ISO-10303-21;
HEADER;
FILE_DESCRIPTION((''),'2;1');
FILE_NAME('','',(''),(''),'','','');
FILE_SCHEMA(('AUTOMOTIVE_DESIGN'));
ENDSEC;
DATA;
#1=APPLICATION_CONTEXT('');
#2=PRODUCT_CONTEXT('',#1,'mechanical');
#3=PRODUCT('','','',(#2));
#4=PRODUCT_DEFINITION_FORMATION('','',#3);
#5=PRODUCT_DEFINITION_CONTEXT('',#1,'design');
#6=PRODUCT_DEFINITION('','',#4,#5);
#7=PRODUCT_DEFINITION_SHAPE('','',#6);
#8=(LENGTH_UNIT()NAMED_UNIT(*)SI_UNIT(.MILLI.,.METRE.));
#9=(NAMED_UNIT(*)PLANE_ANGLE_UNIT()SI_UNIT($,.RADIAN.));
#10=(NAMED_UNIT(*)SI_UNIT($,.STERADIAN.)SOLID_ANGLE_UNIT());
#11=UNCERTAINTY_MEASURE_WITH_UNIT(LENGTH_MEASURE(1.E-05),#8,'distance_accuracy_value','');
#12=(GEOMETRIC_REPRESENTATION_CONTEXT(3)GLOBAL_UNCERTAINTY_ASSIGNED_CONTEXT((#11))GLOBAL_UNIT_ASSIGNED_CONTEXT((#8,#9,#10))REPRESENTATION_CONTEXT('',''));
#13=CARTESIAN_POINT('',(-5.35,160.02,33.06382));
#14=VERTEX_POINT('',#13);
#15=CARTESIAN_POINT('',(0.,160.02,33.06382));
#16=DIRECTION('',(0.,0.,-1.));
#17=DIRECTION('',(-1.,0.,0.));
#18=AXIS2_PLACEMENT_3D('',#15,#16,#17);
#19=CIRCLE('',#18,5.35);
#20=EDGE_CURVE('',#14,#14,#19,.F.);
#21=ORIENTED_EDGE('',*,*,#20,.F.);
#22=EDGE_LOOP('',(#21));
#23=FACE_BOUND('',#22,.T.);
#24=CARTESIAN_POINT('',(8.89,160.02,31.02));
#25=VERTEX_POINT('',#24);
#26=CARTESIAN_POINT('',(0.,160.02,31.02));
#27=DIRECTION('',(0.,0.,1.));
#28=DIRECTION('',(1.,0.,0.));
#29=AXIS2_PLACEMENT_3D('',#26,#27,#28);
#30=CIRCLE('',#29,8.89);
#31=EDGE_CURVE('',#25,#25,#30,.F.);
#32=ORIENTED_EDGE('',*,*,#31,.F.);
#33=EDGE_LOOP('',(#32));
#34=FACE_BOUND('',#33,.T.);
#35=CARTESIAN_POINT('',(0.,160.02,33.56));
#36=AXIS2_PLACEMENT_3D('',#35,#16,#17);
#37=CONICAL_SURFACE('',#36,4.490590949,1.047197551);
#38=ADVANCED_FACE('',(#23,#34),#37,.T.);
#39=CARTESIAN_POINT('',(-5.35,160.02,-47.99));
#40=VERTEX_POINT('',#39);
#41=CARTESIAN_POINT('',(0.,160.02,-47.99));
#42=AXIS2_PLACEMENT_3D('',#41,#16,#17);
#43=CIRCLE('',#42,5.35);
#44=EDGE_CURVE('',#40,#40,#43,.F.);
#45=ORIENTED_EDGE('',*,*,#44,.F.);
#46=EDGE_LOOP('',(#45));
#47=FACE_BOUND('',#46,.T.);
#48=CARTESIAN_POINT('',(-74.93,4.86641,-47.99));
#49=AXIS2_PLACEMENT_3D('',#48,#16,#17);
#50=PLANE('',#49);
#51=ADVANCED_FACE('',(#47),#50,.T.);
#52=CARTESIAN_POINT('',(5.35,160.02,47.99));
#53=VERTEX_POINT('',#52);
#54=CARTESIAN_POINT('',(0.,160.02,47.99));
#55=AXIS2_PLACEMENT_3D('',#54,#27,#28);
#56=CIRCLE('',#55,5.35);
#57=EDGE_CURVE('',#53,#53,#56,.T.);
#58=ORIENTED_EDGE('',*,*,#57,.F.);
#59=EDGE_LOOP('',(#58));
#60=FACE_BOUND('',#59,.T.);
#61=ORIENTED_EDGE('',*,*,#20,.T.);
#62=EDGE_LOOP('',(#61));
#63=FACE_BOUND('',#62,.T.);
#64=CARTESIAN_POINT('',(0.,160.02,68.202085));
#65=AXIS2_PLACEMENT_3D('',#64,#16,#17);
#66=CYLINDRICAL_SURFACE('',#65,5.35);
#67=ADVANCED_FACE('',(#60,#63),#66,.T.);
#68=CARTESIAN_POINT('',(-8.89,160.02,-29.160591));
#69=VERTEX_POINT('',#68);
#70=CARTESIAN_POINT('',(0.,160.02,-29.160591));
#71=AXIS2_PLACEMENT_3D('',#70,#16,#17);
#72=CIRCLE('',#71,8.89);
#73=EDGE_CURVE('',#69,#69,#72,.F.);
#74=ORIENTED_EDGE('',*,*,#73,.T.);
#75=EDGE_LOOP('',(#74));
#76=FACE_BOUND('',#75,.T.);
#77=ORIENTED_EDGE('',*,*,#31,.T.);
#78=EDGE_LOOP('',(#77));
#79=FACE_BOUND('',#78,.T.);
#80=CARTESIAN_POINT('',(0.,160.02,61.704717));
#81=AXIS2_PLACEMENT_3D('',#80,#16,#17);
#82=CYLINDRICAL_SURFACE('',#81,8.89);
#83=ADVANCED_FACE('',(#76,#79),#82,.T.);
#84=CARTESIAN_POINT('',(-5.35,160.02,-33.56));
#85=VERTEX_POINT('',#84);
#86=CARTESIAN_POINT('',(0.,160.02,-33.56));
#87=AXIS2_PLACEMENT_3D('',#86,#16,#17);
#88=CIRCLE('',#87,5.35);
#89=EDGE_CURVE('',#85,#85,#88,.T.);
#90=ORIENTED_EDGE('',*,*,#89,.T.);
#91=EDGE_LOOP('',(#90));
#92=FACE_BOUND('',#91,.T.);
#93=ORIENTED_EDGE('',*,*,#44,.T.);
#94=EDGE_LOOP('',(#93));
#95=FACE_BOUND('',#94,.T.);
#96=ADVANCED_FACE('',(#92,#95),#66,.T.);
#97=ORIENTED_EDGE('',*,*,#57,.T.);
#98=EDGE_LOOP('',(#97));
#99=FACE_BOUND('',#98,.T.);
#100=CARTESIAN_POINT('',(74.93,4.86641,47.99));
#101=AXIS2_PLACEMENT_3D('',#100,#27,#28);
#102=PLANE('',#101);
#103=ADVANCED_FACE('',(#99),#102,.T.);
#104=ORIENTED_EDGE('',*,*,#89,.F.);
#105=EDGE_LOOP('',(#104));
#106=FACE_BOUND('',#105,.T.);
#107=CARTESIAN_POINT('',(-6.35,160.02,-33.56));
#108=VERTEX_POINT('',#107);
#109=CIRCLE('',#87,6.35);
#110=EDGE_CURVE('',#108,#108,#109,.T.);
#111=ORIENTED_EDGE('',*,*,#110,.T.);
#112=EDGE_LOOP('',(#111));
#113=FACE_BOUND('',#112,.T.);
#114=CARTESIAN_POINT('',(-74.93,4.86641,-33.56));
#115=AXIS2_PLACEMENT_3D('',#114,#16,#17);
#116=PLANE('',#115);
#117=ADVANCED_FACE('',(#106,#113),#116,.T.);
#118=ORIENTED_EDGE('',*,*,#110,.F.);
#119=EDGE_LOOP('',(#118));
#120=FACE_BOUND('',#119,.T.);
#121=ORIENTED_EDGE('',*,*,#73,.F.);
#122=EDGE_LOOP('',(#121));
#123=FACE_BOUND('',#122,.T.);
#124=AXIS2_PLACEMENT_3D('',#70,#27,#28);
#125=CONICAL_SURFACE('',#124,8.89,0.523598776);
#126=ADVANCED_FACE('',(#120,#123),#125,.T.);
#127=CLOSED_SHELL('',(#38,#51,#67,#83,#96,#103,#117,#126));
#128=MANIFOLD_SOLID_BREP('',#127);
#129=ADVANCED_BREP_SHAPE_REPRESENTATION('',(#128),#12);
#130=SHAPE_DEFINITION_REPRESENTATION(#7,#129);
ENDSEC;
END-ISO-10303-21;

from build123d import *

# Parameters (mm, degrees)
BOSS_EXTRUDE1_DEPTH      = 47.99
BOSS_EXTRUDE1_DEPTH_BACK = 47.99
SKETCH2_R                = 5.35
BOSS_EXTRUDE2_DEPTH      = 33.56
BOSS_EXTRUDE2_DEPTH_BACK = 33.56
SKETCH3_R                = 8.89
CHAMFER1_SIZE            = 4.399409051
CHAMFER1_SIZE_2          = 2.54


with BuildPart() as part:
    # Sketch2 → Boss-Extrude1 (new, two sides: drawn at the far end of the back side and taken through both)
    with BuildSketch(Plane.XY.offset(-BOSS_EXTRUDE1_DEPTH_BACK)):
        with Locations(Location((0, 160.02, 0), (0, 0, 180))):
            Circle(SKETCH2_R)
    extrude(amount=BOSS_EXTRUDE1_DEPTH + BOSS_EXTRUDE1_DEPTH_BACK)

    # Sketch3 → Boss-Extrude2 (add, two sides: drawn at the far end of the back side and taken through both)
    with BuildSketch(Plane.XY.offset(-BOSS_EXTRUDE2_DEPTH_BACK)):
        with Locations(Location((0, 160.02, 0), (0, 0, 180))):
            Circle(SKETCH3_R)
    extrude(amount=BOSS_EXTRUDE2_DEPTH + BOSS_EXTRUDE2_DEPTH_BACK)

    # Chamfer1
    # the kernel refuses this chamfer: 4.399409051, 2.54 mm, written as the material it takes off along each edge
    with BuildSketch(Plane(origin=(0, 160.02, -33.56), x_dir=(-1, 0, 0), z_dir=(0, 1, 0))) as chamfer1_piece_1:
        Polygon((8.89, CHAMFER1_SIZE), (8.89 - CHAMFER1_SIZE_2, 0), (8.89, 0), align=None)
    revolve(axis=Axis((0, 160.02, -33.56), (0, 0, 1)), mode=Mode.SUBTRACT)
    with BuildSketch(Plane(origin=(0, 160.02, 33.56), x_dir=(-1, 0, 0), z_dir=(0, 1, 0))) as chamfer1_piece_2_section:
        Polygon((8.89 - CHAMFER1_SIZE, 0), (8.89, -CHAMFER1_SIZE_2), (8.89, 0), align=None)
    chamfer1_piece_2 = revolve(axis=Axis((0, 160.02, 33.56), (0, 0, 1)), mode=Mode.PRIVATE)
    chamfer1_piece_2 = chamfer1_piece_2 - Plane(origin=(0, 160.02, 32.054862078), x_dir=(-1, 0, 0), z_dir=(0, 0, -1)) * Cylinder(5.35, 36, mode=Mode.PRIVATE)
    add(chamfer1_piece_2, mode=Mode.SUBTRACT)


solid = part.part
